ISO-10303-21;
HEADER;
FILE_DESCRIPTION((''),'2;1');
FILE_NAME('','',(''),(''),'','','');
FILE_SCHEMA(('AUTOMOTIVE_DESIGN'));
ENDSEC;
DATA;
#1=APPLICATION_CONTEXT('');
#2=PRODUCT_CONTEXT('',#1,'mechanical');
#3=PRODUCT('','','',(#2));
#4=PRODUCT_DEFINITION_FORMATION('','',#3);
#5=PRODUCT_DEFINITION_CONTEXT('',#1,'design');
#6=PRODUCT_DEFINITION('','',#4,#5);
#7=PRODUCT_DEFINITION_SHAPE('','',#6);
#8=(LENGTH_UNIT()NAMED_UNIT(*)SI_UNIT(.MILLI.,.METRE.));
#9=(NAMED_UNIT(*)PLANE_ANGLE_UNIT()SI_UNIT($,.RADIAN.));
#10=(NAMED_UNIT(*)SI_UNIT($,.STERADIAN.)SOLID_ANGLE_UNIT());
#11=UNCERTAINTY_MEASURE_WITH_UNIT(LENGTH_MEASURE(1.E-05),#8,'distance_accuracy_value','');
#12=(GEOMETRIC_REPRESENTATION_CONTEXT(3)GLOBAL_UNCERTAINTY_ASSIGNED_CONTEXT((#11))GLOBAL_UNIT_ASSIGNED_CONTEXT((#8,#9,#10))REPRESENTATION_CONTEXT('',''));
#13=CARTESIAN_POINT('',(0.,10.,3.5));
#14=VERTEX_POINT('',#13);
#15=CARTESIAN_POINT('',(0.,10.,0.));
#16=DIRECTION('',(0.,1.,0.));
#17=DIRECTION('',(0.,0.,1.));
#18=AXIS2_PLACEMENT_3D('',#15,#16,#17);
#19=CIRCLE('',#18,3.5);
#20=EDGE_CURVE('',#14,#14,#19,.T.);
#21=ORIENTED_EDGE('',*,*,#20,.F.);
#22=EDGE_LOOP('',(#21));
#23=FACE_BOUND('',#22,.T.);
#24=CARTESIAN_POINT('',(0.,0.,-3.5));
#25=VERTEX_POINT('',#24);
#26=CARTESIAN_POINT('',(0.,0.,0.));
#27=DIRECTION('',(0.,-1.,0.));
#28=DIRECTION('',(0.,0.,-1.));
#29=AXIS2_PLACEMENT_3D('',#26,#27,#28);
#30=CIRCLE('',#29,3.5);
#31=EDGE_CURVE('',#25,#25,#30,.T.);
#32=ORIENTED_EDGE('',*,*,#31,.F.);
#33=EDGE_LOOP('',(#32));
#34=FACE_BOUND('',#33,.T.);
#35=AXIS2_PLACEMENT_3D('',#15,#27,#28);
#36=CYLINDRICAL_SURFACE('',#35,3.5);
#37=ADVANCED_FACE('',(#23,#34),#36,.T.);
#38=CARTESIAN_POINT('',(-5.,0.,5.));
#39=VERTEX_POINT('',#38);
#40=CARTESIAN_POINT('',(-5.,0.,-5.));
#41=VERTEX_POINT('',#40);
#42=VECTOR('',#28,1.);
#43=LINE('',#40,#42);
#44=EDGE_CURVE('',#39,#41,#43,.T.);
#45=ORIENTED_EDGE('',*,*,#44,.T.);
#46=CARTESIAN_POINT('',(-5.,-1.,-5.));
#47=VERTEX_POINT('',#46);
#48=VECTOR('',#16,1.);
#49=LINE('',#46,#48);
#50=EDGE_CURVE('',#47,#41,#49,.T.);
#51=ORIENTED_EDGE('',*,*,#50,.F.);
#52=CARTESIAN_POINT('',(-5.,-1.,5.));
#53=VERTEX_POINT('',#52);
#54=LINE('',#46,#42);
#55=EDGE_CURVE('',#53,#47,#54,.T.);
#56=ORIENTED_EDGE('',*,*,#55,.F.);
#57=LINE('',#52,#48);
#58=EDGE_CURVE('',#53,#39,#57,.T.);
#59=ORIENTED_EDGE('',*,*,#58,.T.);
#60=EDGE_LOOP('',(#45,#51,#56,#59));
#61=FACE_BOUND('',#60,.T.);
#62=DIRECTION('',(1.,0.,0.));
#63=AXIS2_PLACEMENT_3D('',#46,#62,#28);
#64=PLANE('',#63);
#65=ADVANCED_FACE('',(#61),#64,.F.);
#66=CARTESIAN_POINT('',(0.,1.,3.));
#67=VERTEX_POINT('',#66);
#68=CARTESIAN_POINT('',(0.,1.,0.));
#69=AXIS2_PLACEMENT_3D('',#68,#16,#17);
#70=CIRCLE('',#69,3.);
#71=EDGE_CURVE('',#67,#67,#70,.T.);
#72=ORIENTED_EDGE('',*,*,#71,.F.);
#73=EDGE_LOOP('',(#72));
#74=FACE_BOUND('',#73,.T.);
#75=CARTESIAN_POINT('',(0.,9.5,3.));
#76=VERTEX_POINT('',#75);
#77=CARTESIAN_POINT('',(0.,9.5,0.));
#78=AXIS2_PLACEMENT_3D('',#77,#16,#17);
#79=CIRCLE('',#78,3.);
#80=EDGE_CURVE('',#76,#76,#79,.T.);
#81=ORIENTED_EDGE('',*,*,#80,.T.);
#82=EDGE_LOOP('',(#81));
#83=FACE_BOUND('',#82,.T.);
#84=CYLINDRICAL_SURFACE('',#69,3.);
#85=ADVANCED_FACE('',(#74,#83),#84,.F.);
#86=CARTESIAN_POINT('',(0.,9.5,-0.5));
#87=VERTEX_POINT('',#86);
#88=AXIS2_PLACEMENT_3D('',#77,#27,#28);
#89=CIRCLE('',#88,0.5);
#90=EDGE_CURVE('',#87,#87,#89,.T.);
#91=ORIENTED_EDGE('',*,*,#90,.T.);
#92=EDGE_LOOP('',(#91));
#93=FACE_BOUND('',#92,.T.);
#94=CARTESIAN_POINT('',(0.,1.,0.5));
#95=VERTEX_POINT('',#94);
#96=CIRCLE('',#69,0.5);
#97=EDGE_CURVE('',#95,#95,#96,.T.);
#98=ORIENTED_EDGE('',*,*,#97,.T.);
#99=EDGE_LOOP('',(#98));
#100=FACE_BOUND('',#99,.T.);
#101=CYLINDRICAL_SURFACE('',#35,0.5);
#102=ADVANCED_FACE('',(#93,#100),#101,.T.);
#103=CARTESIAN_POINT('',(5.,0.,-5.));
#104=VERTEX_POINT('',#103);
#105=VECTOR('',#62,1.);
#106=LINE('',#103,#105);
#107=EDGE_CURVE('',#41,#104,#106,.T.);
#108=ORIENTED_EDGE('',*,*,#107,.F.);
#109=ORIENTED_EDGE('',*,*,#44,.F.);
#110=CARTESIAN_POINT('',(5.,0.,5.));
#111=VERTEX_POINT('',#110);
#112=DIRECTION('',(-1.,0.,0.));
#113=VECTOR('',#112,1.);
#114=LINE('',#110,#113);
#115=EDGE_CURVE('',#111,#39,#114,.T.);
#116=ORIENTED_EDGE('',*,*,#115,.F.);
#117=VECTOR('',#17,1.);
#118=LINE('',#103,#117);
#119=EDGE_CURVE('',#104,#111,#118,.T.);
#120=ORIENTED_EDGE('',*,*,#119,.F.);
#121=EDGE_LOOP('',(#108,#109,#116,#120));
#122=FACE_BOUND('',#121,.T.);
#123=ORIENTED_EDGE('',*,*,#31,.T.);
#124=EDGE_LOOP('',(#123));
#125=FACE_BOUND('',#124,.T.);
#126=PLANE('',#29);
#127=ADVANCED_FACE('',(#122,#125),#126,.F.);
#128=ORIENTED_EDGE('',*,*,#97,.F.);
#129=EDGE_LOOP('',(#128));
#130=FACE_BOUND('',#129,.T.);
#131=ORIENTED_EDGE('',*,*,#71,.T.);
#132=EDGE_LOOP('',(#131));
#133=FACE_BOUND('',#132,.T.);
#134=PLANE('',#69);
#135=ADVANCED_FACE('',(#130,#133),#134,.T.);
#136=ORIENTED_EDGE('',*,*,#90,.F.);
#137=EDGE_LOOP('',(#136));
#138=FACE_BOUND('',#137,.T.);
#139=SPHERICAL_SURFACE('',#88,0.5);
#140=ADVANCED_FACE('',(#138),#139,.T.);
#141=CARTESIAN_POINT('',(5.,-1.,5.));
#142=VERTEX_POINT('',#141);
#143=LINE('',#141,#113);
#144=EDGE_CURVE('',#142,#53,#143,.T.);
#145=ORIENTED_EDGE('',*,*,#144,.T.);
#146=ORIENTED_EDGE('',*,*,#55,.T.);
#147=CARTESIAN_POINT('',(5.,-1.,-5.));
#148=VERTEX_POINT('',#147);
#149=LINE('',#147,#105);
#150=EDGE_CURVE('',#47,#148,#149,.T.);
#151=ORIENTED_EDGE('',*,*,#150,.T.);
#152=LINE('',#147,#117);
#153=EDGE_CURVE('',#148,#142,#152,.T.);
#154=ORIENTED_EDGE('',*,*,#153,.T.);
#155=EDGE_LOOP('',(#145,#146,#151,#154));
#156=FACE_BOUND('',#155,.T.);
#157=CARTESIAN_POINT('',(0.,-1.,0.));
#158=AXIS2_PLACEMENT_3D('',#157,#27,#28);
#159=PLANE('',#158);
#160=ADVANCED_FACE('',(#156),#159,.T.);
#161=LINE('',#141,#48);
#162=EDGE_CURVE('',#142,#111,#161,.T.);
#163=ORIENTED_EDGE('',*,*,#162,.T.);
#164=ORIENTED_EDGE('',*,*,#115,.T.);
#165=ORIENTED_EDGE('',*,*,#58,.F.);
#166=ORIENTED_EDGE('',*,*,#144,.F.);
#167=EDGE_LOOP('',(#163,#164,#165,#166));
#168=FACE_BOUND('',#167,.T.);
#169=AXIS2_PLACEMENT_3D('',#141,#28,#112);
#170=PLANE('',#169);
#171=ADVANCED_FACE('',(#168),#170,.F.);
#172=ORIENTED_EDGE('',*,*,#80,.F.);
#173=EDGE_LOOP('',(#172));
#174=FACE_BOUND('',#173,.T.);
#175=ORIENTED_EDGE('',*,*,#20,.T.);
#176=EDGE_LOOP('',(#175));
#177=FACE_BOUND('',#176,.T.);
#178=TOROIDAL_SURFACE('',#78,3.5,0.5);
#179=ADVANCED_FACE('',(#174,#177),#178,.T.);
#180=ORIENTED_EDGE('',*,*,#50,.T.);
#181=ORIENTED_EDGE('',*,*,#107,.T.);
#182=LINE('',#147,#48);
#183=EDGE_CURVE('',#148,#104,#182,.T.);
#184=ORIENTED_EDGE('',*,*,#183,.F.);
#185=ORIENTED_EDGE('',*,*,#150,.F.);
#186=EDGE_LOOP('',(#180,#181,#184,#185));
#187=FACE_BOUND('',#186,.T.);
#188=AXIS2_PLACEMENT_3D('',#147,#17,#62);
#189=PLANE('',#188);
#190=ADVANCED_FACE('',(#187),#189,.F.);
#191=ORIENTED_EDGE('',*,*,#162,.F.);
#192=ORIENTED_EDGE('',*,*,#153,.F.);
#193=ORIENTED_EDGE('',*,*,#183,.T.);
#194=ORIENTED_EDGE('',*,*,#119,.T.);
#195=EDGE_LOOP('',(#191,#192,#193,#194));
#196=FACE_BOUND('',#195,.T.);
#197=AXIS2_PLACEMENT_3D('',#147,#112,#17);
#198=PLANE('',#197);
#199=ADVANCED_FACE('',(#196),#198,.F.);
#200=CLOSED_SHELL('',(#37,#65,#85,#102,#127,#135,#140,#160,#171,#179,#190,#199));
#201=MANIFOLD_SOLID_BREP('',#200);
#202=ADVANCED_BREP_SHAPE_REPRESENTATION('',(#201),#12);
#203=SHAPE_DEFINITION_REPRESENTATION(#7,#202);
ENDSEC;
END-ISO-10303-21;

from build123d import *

# Parameters (mm, degrees)
SKETCH1_R           = 3.5
BOSS_EXTRUDE1_DEPTH = 10
SKETCH2_R           = 3
CUT_EXTRUDE1_DEPTH  = 9
SKETCH3_R           = 0.5
BOSS_EXTRUDE2_DEPTH = 9
FILLET1_R           = 0.5
SKETCH4_W           = 10
SKETCH4_H           = 10
BOSS_EXTRUDE3_DEPTH = 1


with BuildPart() as part:
    # Sketch1 → Boss-Extrude1 (new body)
    with BuildSketch(Plane(origin=(0, 0, 0), x_dir=(1, 0, 0), z_dir=(0, 1, 0))):
        with Locations(Location((0, 0, 0), (0, 0, 270))):
            Circle(SKETCH1_R)
    extrude(amount=BOSS_EXTRUDE1_DEPTH)

    # Sketch2 → Cut-Extrude1 (cut)
    with BuildSketch(Plane(origin=(0, 10, 0), x_dir=(1, 0, 0), z_dir=(0, 1, 0))):
        with Locations(Location((0, 0, 0), (0, 0, 270))):
            Circle(SKETCH2_R)
    extrude(amount=-CUT_EXTRUDE1_DEPTH, mode=Mode.SUBTRACT)

    # Sketch3 → Boss-Extrude2 (add)
    with BuildSketch(Plane(origin=(0, 1, 0), x_dir=(1, 0, 0), z_dir=(0, 1, 0))):
        with Locations(Location((0, 0, 0), (0, 0, 270))):
            Circle(SKETCH3_R)
    extrude(amount=BOSS_EXTRUDE2_DEPTH)

    # Fillet1
    fillet1_edges = [part.edges().sort_by_distance(p)[0] for p in [
        (0, 10, -0.5),
        (0, 10, -3),
    ]]
    fillet(fillet1_edges, radius=FILLET1_R - 0.0001)  # a hair under: the kernel refuses the full size

    # Sketch4 → Boss-Extrude3 (add)
    with BuildSketch(Plane(origin=(0, 0, 0), x_dir=(-1, 0, 0), z_dir=(0, -1, 0))):
        Rectangle(SKETCH4_W, SKETCH4_H)
    extrude(amount=BOSS_EXTRUDE3_DEPTH)


solid = part.part
